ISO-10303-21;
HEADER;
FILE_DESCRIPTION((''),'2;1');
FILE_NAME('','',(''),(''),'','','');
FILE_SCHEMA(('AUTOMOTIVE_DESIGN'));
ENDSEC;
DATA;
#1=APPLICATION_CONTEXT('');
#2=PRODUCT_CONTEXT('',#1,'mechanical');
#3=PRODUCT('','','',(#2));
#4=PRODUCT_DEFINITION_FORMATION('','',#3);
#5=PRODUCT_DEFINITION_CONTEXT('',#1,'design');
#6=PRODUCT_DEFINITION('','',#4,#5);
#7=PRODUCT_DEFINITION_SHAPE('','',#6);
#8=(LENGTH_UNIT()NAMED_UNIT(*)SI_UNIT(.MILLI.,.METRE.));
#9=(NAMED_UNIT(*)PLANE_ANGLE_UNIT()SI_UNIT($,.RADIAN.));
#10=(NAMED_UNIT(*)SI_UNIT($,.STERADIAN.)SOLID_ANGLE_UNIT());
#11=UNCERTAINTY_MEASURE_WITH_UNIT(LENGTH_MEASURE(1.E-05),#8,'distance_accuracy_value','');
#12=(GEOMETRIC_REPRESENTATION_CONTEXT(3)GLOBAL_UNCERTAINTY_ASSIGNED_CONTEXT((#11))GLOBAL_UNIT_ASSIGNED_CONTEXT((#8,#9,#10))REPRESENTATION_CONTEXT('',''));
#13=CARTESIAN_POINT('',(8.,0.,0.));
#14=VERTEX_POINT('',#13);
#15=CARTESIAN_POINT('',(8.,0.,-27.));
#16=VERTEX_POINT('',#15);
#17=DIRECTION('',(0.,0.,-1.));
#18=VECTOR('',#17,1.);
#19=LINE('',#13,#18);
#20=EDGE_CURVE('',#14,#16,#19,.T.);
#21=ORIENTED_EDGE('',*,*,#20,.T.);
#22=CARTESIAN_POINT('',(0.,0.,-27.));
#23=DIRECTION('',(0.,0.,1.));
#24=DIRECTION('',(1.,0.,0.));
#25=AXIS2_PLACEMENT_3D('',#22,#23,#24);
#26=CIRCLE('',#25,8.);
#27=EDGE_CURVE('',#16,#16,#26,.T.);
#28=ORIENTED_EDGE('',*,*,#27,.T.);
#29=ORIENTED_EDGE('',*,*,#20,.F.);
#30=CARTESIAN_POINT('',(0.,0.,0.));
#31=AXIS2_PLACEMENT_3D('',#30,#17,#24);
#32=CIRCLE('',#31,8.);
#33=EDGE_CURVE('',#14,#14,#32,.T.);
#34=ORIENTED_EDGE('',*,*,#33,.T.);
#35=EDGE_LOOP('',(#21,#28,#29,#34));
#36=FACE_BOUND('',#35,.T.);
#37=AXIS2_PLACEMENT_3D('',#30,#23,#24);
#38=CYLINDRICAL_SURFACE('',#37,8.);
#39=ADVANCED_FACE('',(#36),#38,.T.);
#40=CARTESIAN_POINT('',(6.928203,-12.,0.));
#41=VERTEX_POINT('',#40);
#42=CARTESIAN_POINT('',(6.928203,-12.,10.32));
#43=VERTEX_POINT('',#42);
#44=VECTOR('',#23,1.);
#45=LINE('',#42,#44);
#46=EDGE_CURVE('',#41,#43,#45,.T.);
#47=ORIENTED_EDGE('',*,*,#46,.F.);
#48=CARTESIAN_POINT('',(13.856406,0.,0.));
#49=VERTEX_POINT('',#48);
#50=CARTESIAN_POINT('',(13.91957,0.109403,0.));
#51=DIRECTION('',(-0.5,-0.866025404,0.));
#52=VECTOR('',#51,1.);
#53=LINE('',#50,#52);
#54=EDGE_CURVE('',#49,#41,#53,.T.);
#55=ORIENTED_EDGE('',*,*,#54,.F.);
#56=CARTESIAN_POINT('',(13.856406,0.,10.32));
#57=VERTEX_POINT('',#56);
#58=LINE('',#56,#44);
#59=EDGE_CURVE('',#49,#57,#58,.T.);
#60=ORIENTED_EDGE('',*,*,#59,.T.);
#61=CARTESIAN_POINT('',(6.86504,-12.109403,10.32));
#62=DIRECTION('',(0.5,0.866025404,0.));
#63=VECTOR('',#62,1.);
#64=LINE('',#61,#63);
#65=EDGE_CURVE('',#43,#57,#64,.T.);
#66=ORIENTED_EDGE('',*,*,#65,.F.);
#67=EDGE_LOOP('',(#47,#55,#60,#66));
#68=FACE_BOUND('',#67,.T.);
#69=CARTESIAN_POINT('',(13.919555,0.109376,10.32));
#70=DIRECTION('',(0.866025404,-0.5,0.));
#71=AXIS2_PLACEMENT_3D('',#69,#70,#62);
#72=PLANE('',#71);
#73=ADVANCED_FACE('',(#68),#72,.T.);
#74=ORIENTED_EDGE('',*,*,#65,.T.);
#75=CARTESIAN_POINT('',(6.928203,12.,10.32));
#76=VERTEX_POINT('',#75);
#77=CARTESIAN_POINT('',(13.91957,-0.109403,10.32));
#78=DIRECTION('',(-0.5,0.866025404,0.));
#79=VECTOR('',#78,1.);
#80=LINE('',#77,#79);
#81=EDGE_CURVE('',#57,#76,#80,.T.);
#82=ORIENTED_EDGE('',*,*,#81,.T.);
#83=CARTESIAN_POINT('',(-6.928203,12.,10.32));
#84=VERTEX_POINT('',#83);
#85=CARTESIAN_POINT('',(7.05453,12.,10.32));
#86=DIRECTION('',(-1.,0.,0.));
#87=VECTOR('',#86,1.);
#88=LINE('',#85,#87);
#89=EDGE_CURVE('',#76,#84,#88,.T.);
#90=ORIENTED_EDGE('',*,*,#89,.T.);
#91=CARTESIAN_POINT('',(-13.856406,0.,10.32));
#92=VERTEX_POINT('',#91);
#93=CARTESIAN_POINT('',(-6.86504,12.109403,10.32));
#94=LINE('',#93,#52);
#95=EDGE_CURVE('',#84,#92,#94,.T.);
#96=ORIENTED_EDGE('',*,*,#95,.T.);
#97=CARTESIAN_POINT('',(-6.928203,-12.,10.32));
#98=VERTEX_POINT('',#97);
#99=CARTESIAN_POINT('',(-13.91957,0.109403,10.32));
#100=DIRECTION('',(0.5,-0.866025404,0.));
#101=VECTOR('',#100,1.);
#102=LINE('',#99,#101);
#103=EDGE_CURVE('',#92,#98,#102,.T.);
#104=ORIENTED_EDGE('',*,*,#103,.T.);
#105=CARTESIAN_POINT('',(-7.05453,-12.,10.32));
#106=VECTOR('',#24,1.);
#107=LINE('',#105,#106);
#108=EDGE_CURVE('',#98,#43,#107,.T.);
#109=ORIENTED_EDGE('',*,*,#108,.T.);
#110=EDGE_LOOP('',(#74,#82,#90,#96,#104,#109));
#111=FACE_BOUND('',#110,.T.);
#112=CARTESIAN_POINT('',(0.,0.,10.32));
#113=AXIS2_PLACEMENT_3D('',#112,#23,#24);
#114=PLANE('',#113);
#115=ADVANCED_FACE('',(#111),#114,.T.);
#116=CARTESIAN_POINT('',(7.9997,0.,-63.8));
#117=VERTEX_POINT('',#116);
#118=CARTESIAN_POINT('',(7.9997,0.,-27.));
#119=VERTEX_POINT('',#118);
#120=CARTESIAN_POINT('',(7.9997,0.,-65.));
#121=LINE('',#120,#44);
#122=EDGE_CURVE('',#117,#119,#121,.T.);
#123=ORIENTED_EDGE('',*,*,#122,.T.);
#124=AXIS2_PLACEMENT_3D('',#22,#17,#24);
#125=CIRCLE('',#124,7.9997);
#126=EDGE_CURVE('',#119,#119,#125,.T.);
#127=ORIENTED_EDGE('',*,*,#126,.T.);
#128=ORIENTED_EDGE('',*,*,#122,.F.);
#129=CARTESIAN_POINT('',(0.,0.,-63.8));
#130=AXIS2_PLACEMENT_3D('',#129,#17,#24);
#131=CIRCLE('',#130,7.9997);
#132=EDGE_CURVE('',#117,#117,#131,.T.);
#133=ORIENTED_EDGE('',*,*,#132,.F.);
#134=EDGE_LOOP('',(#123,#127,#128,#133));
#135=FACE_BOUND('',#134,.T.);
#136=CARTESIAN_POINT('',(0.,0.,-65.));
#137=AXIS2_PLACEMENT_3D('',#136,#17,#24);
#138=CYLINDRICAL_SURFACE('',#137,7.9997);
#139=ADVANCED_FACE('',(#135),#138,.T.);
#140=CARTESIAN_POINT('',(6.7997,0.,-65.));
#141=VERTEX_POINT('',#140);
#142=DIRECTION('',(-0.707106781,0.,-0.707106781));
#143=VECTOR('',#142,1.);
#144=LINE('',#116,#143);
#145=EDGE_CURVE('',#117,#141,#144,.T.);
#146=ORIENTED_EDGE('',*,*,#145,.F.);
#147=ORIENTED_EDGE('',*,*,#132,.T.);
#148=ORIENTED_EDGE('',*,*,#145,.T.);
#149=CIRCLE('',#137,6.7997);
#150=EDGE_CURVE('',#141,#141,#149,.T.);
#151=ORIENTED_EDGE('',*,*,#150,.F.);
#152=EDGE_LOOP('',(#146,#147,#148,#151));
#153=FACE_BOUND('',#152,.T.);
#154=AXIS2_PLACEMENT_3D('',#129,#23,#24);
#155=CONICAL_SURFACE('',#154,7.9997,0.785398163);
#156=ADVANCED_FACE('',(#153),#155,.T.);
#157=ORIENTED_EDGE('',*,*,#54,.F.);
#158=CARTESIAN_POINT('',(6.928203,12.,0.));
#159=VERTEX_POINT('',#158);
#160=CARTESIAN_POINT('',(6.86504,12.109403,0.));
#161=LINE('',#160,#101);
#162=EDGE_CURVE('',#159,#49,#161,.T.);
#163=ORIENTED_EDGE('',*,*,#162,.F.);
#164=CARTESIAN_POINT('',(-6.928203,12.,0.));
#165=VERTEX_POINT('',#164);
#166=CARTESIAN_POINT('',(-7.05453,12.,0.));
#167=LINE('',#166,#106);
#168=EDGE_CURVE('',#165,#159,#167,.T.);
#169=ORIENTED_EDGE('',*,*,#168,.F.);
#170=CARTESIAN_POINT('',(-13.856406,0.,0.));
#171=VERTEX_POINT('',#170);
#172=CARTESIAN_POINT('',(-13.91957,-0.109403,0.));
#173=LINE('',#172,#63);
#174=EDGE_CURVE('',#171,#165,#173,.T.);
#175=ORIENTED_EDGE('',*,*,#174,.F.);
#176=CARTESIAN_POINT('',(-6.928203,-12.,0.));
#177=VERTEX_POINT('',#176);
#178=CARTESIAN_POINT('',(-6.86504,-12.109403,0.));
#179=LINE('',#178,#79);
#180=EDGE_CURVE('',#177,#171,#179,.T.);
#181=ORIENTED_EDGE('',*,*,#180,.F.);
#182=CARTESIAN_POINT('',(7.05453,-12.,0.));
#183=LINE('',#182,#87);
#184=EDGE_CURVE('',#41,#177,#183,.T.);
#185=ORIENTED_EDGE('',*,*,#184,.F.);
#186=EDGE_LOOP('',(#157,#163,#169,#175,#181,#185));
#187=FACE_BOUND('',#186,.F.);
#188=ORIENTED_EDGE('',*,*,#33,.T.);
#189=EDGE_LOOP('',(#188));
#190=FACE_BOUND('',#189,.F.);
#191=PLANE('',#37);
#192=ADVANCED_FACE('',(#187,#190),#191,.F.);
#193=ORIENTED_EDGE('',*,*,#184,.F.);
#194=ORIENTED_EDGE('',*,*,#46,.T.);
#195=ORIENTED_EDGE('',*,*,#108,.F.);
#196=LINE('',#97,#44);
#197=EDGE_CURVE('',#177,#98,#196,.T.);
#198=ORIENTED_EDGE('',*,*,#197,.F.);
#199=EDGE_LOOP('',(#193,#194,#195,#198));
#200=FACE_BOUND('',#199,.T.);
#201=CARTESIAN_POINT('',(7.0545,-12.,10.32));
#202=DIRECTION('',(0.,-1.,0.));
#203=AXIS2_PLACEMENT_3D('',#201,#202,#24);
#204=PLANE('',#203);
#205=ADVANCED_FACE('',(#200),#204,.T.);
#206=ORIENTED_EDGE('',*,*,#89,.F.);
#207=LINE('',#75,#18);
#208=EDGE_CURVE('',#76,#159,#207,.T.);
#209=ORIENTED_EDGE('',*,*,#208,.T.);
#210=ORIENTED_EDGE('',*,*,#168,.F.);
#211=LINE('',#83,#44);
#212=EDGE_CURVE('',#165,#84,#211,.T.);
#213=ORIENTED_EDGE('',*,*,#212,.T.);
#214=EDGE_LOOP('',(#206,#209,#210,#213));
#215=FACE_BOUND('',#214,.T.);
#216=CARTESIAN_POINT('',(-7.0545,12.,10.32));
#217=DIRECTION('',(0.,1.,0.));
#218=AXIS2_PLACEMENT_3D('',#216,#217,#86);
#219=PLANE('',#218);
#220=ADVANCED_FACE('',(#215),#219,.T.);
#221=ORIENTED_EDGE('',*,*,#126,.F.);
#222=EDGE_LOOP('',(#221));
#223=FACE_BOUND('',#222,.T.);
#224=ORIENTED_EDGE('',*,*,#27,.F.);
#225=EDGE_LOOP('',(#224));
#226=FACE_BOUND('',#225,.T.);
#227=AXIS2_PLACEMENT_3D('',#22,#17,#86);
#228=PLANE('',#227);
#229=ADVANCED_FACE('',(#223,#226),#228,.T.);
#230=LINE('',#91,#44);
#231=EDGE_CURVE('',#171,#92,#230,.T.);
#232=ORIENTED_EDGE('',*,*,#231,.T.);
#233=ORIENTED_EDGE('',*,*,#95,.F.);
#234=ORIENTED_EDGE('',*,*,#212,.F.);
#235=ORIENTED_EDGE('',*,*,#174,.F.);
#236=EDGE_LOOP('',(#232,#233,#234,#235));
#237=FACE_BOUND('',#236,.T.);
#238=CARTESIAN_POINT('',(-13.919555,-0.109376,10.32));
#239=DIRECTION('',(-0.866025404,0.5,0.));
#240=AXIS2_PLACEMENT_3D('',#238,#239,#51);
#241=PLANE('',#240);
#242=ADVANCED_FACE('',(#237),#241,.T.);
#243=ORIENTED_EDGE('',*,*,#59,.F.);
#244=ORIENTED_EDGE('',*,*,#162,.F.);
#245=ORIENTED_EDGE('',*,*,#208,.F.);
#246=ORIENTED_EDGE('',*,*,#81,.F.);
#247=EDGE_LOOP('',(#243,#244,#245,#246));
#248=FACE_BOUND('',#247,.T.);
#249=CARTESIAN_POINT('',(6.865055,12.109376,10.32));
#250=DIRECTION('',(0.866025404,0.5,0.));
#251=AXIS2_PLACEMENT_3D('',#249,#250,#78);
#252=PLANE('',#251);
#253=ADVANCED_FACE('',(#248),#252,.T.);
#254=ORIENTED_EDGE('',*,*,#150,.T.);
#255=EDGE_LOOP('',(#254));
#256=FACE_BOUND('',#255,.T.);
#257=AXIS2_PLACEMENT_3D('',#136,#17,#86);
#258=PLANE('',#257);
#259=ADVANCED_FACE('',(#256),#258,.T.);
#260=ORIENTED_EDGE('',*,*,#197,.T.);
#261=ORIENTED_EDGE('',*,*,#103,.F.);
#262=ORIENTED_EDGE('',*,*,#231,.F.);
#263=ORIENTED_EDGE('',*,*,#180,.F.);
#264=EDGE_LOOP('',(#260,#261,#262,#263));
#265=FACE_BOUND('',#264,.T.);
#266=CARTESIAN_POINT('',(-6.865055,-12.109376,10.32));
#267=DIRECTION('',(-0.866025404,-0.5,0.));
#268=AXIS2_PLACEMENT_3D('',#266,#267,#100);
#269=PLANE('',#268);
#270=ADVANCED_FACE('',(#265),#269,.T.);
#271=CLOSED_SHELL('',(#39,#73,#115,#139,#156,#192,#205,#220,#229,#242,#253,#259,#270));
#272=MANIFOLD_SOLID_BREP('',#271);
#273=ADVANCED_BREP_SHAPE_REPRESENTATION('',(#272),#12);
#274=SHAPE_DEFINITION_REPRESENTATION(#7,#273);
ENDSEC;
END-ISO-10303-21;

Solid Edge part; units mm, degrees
sketch "Sketch1" plane through (0, 0, 0) normal (0, 0, 1) x (1, 0, 0)
  circle A0 centre (0, 0) radius 13.92
  dimension "D1" = 27.84
extrude "Protrusion1" add sketch "Sketch1" along normal blind 10.32
sketch "Sketch2" plane through (0, 0, 0) normal (0, 0, -1) x (1, 0, 0)
  circle A0 centre (0, 0) radius 8
extrude "Protrusion2" add sketch "Sketch2" along normal blind 65
sketch "Sketch3" plane through (0, 0, -65) normal (0, 0, -1) x (1, 0, 0)
  circle A0 centre (0, 0) radius 7.9997
extrude "Cutout1" cut sketch "Sketch3" against normal blind 38 flip side to cut
chamfer "Chamfer_1" distance 1.2 angle 45 1 edges at (-7.9997, 0, -65)
sketch "Sketch4" plane through (0, 0, 10.32) normal (0, 0, 1) x (1, 0, 0)
  line L0 (-7.0545, 12) -> (7.0545, 12)
  dimension "D1" = 24
extrude "Cutout2" cut sketch "Sketch4" against normal up to next material side at (0, 12.05, 10.32)
pattern_circular "Pattern1" count 6 over 360 about axis through (0, 0, 10.32) along (0, 0, 1) of "Cutout2"
properties part number "24104520"
